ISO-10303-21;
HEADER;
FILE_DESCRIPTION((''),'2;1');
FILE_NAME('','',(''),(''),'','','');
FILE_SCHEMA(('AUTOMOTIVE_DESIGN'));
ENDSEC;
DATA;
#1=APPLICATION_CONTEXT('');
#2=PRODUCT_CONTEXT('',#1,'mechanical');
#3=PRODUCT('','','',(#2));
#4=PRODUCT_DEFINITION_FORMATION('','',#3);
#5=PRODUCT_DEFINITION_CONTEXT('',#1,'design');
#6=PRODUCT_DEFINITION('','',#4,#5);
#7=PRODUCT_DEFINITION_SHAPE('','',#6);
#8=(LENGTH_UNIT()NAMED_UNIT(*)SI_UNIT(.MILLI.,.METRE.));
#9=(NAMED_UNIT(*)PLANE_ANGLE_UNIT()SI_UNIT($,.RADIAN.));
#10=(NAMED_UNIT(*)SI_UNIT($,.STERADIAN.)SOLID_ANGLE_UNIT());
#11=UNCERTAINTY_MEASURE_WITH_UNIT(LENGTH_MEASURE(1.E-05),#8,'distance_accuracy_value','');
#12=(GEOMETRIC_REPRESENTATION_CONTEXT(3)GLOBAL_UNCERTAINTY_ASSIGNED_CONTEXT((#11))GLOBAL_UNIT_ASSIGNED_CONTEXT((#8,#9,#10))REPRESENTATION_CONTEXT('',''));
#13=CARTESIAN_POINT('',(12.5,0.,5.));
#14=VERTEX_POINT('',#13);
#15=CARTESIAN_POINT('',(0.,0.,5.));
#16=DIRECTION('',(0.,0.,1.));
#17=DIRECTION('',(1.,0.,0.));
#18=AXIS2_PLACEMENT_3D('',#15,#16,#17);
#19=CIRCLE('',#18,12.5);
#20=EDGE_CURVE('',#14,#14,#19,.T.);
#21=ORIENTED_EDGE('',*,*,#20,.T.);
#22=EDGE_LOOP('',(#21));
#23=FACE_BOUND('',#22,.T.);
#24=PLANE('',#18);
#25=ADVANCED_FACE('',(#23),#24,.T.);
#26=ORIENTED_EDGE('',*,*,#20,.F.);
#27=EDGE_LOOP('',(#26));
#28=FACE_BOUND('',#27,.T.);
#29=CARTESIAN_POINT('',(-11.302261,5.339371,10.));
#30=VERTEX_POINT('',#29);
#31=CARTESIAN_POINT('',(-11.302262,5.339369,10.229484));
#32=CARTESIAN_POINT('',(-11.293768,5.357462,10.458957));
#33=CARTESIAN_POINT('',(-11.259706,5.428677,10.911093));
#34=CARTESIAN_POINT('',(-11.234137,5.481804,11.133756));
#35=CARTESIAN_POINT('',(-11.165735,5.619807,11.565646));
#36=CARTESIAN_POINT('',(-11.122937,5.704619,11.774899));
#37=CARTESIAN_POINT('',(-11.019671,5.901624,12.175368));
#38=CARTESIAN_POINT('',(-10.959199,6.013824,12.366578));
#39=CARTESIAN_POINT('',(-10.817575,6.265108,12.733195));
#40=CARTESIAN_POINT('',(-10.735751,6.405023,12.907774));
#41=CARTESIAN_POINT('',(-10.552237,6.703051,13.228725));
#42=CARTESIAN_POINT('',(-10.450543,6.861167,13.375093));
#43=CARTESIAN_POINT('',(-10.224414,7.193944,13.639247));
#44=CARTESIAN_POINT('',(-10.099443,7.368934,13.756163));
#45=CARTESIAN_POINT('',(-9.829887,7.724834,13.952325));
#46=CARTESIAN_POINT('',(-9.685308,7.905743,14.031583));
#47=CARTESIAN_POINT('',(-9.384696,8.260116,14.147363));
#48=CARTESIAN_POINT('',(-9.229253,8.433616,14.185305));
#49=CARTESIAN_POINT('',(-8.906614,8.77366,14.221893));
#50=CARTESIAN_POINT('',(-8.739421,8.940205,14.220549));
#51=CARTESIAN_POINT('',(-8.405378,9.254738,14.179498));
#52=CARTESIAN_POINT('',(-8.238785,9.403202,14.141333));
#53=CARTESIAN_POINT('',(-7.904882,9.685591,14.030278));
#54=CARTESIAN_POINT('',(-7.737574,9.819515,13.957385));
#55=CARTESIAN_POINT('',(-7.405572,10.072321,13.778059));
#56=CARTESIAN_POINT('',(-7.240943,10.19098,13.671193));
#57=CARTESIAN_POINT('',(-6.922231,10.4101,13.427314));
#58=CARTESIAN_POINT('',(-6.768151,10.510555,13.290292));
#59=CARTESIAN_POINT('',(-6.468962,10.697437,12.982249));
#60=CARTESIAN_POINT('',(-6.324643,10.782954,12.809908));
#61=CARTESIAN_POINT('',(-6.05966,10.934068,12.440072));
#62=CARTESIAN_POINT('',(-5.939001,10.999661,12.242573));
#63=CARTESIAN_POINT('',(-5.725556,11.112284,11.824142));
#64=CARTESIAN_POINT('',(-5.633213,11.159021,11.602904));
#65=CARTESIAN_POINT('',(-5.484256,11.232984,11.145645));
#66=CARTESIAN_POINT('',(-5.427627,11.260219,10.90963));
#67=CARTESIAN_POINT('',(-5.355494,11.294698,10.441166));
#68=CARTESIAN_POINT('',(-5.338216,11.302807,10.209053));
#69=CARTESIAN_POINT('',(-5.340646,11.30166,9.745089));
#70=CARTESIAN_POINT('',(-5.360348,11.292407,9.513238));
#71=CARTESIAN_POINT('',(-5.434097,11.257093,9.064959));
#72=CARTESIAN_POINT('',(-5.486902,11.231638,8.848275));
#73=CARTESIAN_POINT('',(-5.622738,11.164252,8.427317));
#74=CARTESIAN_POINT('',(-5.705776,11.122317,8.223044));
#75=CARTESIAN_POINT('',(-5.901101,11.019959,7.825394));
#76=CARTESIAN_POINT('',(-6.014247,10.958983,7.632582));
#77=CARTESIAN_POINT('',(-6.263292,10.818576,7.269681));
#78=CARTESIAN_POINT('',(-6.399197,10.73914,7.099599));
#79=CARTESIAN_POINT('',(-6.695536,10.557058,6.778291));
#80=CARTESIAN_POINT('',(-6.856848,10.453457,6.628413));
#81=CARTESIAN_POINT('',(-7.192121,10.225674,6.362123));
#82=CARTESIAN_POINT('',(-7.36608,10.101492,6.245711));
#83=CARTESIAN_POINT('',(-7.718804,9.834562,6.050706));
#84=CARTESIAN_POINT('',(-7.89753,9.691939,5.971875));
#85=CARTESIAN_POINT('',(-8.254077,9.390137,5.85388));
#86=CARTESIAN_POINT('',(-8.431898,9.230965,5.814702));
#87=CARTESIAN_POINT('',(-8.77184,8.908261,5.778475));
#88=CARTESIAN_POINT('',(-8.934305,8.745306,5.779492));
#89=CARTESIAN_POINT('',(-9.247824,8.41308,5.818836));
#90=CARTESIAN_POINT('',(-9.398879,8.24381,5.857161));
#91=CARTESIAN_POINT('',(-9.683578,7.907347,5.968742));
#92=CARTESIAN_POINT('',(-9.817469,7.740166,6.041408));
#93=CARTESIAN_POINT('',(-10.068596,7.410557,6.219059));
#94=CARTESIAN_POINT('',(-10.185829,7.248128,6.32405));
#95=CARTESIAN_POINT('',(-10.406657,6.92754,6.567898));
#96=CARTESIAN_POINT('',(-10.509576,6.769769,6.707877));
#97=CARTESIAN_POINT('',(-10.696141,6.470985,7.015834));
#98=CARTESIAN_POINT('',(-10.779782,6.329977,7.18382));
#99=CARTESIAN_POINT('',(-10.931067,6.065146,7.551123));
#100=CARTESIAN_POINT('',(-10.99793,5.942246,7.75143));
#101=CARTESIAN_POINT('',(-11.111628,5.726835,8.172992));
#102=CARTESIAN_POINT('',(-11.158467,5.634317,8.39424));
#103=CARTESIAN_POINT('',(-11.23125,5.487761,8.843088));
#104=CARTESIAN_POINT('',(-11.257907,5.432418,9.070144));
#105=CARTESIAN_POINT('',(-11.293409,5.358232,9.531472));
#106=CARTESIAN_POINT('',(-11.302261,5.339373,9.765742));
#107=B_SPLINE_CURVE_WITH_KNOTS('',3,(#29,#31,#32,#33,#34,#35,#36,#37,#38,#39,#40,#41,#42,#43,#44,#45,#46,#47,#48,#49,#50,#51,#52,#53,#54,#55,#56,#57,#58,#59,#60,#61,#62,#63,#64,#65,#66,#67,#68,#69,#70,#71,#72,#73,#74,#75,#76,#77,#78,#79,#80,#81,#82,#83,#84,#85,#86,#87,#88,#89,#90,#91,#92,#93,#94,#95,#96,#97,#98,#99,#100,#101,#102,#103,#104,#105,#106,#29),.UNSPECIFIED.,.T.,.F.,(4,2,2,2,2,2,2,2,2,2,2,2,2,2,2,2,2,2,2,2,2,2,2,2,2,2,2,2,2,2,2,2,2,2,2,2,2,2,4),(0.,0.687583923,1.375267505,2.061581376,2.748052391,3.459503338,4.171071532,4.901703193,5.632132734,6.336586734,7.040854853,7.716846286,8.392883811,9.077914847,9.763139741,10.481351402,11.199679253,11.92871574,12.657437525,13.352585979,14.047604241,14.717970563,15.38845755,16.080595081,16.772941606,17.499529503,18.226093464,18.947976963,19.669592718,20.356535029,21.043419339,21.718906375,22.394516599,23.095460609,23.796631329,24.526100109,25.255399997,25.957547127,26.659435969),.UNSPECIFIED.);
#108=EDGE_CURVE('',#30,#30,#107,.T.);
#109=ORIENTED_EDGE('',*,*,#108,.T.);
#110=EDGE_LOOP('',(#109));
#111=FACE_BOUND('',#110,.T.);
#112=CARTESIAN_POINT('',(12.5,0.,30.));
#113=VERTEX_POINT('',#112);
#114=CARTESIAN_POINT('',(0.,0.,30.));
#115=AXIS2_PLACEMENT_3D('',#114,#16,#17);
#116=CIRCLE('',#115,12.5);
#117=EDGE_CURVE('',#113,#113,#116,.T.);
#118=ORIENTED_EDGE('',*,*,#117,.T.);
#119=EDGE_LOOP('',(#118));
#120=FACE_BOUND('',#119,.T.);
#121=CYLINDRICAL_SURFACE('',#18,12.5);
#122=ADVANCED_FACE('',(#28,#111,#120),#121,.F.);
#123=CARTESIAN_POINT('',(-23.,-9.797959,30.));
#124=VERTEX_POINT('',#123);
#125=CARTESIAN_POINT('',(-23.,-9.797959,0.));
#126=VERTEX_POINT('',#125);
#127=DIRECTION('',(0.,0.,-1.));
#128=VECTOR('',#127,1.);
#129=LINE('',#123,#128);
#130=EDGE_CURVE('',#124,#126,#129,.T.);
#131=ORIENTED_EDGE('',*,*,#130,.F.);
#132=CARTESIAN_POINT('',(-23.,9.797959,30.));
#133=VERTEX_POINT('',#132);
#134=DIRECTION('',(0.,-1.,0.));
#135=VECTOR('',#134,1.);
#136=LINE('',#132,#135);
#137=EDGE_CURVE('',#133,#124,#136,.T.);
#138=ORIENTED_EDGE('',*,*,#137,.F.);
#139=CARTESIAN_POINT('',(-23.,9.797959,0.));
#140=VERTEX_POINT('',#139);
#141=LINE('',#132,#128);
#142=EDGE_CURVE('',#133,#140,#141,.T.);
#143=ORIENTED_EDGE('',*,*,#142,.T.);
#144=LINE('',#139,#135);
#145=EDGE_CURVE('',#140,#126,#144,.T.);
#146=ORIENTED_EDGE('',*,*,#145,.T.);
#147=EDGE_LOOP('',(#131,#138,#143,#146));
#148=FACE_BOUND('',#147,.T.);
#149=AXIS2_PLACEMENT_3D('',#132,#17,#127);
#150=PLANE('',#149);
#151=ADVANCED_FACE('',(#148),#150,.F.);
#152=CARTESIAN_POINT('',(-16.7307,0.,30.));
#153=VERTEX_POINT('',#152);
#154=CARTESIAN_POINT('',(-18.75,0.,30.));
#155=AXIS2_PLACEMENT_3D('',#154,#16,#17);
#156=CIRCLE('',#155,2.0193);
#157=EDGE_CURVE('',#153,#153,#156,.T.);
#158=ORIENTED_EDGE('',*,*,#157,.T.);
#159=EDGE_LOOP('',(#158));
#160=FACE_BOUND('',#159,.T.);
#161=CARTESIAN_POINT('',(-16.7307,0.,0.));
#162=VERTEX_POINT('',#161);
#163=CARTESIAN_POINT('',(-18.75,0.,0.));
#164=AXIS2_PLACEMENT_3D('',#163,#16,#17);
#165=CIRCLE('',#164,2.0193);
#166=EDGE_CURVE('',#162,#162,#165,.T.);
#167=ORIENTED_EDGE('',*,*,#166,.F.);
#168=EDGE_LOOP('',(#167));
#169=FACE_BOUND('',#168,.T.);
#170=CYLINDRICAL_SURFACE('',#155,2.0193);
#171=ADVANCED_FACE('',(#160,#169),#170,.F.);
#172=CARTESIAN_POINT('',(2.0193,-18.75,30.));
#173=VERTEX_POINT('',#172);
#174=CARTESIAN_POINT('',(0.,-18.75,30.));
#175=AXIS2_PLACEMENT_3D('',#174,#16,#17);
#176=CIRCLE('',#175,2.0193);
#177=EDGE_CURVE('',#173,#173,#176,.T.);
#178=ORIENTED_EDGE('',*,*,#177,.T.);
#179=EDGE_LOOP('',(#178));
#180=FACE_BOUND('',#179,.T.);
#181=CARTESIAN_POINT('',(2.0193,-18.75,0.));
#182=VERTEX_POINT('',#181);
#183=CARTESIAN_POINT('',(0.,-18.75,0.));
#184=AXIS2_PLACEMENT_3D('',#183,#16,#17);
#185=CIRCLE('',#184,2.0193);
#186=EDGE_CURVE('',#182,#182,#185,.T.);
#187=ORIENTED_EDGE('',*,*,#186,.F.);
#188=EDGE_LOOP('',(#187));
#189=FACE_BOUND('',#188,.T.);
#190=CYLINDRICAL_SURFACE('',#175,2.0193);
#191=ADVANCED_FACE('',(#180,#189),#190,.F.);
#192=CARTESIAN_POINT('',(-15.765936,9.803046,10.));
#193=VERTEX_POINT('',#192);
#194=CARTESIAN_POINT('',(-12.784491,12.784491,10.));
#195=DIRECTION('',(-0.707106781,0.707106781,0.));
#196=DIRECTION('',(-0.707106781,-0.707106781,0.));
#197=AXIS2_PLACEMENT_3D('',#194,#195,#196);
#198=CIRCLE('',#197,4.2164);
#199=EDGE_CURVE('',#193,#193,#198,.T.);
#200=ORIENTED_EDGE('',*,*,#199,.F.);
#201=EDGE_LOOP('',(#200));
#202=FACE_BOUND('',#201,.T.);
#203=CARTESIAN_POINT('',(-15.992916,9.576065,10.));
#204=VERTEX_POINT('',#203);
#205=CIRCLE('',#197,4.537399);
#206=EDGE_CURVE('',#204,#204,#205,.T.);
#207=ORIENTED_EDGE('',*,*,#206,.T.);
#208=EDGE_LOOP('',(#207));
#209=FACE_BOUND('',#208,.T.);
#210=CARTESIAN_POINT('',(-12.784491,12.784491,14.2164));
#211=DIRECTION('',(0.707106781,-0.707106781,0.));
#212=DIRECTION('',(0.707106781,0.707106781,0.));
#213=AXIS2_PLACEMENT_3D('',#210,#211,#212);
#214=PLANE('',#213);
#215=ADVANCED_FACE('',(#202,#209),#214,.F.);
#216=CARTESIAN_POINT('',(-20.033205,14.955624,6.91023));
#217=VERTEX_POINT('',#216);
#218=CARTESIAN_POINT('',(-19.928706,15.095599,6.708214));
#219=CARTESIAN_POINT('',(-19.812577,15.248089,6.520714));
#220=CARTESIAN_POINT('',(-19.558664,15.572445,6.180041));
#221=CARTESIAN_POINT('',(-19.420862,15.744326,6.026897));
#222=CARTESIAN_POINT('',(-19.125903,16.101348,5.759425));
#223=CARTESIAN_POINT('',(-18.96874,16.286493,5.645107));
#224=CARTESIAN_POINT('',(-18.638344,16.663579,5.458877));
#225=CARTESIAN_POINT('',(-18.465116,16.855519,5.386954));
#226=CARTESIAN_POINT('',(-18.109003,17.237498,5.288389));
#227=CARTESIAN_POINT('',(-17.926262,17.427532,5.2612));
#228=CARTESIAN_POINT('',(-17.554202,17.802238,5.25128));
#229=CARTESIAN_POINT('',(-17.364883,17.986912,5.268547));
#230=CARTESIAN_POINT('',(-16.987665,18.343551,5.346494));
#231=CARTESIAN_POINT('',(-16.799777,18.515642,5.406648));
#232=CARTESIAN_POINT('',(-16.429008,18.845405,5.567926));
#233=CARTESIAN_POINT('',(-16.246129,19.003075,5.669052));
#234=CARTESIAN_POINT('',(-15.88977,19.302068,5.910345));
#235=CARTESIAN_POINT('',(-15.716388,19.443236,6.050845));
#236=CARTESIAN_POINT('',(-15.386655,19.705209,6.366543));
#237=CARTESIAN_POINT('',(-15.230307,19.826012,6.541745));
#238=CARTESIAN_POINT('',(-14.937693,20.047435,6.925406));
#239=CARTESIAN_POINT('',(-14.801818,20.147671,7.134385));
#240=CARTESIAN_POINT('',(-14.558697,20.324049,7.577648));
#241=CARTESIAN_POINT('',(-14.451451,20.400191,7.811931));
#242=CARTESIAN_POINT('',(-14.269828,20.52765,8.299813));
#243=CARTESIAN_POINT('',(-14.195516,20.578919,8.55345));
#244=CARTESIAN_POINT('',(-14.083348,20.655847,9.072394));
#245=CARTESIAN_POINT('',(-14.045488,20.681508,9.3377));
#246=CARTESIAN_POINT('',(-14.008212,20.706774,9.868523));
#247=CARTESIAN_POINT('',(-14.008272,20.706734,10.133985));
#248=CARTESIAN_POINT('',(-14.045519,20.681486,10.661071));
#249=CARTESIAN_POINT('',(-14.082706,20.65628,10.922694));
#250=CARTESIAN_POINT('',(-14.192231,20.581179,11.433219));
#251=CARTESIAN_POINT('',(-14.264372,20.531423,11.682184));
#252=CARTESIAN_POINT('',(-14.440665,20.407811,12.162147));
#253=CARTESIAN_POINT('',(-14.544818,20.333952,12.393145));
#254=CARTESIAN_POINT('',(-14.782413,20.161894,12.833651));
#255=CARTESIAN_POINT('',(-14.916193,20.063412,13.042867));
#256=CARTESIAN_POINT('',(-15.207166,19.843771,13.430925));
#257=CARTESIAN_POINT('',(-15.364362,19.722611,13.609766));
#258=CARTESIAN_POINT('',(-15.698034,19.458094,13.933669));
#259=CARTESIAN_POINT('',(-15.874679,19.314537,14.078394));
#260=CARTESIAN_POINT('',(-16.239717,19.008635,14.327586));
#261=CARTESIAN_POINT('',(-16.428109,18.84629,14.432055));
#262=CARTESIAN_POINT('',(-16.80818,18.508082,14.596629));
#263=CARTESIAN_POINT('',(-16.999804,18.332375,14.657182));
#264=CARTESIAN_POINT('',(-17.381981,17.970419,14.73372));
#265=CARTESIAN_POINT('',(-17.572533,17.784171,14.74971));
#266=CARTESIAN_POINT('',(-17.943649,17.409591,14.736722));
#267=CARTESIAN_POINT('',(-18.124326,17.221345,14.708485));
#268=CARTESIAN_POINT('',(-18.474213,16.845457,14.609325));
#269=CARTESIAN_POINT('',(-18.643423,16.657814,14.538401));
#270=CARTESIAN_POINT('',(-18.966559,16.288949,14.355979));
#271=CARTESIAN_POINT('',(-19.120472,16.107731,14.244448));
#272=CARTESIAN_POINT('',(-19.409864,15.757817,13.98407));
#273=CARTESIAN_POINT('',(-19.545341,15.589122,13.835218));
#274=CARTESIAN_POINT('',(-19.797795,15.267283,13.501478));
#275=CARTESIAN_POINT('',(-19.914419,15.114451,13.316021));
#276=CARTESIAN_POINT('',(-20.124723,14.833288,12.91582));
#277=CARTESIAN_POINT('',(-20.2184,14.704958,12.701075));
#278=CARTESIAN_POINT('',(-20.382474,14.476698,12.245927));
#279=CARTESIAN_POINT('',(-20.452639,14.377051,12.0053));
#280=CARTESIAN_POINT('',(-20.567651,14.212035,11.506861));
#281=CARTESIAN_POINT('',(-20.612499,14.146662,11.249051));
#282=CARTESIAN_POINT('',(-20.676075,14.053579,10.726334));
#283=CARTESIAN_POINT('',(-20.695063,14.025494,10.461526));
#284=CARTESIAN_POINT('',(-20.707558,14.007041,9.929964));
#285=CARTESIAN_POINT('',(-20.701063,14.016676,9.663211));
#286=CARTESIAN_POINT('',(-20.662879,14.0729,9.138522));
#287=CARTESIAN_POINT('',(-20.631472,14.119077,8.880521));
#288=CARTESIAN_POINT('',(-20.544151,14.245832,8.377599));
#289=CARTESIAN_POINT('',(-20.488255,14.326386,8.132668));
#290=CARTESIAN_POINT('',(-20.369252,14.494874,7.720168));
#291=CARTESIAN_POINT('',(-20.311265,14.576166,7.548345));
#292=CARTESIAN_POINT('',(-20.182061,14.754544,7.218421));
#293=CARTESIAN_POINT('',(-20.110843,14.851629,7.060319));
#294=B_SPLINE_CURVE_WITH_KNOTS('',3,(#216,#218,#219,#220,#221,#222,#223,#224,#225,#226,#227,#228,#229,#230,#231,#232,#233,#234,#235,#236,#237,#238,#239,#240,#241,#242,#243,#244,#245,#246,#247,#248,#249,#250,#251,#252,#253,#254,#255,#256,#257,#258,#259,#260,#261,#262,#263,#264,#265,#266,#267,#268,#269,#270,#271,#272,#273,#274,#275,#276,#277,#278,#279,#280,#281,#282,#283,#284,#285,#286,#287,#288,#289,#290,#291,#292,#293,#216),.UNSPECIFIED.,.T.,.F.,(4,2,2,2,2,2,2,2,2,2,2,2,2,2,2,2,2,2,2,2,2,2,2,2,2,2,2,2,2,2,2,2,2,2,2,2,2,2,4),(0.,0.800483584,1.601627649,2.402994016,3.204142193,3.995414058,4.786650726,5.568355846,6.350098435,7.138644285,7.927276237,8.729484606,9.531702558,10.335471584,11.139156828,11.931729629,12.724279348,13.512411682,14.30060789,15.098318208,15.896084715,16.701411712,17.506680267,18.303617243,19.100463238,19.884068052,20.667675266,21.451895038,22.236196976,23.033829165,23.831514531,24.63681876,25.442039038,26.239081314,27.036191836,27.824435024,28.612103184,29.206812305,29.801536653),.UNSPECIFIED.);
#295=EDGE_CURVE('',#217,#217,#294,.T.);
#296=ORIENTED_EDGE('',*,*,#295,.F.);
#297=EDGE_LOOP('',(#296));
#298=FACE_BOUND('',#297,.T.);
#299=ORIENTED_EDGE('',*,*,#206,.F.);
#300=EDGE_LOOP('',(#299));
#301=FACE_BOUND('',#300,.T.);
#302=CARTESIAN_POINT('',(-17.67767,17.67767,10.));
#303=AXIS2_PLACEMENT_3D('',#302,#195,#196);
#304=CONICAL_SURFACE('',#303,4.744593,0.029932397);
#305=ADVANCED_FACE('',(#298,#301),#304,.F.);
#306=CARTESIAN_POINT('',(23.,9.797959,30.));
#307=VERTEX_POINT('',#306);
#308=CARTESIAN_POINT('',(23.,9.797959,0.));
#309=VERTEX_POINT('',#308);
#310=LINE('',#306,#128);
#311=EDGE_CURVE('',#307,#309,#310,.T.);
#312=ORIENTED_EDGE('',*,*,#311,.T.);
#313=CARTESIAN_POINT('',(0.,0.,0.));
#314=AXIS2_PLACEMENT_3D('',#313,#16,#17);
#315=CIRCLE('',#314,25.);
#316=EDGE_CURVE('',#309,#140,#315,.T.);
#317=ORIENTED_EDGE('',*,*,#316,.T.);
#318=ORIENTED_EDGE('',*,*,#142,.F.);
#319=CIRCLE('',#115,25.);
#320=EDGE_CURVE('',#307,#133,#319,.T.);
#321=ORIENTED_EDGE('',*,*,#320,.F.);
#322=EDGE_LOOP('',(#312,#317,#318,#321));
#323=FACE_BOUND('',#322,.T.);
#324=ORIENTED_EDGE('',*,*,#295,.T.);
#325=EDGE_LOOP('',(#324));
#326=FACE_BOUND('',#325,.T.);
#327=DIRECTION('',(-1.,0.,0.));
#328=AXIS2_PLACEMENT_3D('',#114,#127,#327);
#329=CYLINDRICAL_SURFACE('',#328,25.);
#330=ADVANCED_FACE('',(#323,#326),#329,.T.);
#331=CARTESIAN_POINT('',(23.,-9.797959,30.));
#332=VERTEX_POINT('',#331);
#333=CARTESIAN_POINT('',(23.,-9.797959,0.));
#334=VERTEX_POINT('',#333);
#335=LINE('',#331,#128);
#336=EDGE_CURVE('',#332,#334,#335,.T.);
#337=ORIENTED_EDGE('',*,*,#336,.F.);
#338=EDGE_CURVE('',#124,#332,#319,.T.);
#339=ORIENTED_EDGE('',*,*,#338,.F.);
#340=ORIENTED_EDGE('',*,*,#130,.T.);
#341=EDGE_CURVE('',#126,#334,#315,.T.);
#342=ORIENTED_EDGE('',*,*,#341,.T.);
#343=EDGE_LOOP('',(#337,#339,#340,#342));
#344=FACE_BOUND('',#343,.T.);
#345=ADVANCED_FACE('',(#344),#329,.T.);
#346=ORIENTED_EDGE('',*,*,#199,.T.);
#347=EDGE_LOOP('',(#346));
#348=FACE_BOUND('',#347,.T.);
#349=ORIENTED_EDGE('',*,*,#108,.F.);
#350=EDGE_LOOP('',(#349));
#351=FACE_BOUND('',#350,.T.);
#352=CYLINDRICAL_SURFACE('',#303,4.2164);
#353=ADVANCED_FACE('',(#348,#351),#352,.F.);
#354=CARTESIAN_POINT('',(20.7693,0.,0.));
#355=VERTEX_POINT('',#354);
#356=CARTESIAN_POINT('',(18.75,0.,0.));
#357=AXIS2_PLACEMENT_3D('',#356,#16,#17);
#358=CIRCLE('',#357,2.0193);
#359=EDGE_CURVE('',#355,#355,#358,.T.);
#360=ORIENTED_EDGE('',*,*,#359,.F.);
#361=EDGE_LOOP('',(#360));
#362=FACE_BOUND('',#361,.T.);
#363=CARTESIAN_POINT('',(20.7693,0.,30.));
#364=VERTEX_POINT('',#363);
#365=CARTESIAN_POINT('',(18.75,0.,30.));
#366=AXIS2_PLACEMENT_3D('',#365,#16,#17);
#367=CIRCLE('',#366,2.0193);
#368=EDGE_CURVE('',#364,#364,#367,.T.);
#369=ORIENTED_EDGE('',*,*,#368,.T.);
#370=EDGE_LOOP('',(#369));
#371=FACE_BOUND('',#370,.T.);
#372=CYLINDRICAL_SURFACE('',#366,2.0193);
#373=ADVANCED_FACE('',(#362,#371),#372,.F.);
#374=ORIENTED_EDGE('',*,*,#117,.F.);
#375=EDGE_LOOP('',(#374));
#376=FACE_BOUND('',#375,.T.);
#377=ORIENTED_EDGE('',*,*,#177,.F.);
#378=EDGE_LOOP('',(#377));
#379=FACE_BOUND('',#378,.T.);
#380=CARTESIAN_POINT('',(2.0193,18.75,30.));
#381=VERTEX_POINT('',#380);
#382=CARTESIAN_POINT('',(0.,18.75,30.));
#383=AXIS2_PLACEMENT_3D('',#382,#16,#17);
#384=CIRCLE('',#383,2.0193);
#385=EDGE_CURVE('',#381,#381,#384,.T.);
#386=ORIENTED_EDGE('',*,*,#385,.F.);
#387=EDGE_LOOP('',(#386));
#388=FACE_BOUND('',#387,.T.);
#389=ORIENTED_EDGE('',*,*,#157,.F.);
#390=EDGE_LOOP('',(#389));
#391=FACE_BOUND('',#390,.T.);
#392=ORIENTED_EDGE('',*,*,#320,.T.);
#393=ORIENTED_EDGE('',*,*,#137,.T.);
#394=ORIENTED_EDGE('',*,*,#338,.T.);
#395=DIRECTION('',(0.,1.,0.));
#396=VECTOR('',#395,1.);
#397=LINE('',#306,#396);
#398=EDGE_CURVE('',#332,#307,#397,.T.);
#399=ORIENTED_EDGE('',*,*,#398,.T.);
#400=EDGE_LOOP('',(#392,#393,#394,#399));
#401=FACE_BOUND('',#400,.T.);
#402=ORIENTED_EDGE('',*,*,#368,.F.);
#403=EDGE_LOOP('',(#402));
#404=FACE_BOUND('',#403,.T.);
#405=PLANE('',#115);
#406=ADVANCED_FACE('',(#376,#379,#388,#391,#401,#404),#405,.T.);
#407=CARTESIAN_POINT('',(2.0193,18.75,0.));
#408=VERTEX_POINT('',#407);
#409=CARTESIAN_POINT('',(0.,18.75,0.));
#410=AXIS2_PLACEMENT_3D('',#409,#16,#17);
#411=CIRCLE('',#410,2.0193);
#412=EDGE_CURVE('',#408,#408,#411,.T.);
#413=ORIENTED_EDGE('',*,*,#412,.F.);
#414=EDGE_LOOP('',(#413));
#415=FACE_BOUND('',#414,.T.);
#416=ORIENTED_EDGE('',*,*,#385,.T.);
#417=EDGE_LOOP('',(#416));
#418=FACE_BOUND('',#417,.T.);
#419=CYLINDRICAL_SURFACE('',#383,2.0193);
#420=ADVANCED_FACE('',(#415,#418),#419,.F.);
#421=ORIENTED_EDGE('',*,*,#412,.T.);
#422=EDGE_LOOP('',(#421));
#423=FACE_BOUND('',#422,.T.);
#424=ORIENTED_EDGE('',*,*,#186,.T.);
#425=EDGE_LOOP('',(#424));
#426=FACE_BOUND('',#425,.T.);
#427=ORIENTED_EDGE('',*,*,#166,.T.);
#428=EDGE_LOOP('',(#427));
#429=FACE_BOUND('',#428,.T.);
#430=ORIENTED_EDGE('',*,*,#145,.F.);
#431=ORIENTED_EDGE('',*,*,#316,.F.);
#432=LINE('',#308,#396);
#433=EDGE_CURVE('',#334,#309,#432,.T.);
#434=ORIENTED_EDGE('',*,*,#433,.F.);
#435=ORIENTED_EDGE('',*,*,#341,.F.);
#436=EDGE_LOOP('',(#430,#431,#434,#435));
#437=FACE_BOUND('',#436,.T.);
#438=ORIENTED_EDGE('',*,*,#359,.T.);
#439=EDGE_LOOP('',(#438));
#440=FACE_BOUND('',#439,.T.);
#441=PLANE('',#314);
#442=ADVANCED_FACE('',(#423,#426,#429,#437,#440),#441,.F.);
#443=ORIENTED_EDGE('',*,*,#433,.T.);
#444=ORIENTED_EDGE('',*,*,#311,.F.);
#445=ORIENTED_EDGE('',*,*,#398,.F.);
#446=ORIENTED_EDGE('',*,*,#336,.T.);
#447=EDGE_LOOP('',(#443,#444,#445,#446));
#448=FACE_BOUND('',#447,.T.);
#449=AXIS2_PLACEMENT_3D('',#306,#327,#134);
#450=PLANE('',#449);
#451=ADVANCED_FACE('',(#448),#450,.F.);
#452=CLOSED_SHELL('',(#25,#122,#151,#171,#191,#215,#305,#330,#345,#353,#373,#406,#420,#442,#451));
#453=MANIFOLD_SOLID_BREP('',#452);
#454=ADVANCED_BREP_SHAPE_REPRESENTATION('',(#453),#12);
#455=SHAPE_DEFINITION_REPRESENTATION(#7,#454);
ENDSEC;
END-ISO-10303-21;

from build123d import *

# Parameters (mm, degrees)
BOSS_EXTRUDE1_DEPTH    = 30
SKETCH6_R              = 12.5
CUT_EXTRUDE1_DEPTH     = 25
F_10_32_TAPPED_HOLE1_D = 4.0386


# Read off the part's stored shape, not the designer's step: 1/8 NPT Tapped Hole1
with BuildPart() as part:
    # Sketch2 → Boss-Extrude1 (new body)
    with BuildSketch(Plane.XY):
        with BuildLine():
            Line((-23, 9.797958971), (-23, -9.797958971))
            ThreePointArc((-23, -9.797958971), (0, -25), (23, -9.797958971))
            Line((23, -9.797958971), (23, 9.797958971))
            ThreePointArc((23, 9.797958971), (0, 25), (-23, 9.797958971))
        make_face()
    extrude(amount=BOSS_EXTRUDE1_DEPTH)

    # Sketch6 → Cut-Extrude1 (cut)
    with BuildSketch(Plane(origin=(0, 0, 30), x_dir=(-1, 0, 0), z_dir=(0, 0, 1))):
        with Locations(Location((0, 0, 0), (0, 0, 180))):
            Circle(SKETCH6_R)
    extrude(amount=-CUT_EXTRUDE1_DEPTH, mode=Mode.SUBTRACT)

    # #10-32 Tapped Hole1 (through all)
    with Locations(Plane.XY.offset(30)):
        with Locations((-18.75, 0), (0, 18.75), (18.75, 0), (0, -18.75)):
            Hole(F_10_32_TAPPED_HOLE1_D / 2)

    # 1/8 NPT Tapped Hole1 outline → 1/8 NPT Tapped Hole1 (revolve, cut)
    with BuildSketch(Plane(origin=(0, 0, 10), x_dir=(0.707106781186546, 0.707106781186549, 0), z_dir=(0, 0, -1))):
        Polygon((4.744600282, -25.000243213), (4.537398933, -18.08), (4.2164, -18.08), (4.2164, -11.766981388), (0, -11.766981388), (0, -25.000243213), align=None)
    revolve(axis=Axis((0, 0, 10), (0.707106781186549, -0.707106781186546, 0)), mode=Mode.SUBTRACT)


solid = part.part
